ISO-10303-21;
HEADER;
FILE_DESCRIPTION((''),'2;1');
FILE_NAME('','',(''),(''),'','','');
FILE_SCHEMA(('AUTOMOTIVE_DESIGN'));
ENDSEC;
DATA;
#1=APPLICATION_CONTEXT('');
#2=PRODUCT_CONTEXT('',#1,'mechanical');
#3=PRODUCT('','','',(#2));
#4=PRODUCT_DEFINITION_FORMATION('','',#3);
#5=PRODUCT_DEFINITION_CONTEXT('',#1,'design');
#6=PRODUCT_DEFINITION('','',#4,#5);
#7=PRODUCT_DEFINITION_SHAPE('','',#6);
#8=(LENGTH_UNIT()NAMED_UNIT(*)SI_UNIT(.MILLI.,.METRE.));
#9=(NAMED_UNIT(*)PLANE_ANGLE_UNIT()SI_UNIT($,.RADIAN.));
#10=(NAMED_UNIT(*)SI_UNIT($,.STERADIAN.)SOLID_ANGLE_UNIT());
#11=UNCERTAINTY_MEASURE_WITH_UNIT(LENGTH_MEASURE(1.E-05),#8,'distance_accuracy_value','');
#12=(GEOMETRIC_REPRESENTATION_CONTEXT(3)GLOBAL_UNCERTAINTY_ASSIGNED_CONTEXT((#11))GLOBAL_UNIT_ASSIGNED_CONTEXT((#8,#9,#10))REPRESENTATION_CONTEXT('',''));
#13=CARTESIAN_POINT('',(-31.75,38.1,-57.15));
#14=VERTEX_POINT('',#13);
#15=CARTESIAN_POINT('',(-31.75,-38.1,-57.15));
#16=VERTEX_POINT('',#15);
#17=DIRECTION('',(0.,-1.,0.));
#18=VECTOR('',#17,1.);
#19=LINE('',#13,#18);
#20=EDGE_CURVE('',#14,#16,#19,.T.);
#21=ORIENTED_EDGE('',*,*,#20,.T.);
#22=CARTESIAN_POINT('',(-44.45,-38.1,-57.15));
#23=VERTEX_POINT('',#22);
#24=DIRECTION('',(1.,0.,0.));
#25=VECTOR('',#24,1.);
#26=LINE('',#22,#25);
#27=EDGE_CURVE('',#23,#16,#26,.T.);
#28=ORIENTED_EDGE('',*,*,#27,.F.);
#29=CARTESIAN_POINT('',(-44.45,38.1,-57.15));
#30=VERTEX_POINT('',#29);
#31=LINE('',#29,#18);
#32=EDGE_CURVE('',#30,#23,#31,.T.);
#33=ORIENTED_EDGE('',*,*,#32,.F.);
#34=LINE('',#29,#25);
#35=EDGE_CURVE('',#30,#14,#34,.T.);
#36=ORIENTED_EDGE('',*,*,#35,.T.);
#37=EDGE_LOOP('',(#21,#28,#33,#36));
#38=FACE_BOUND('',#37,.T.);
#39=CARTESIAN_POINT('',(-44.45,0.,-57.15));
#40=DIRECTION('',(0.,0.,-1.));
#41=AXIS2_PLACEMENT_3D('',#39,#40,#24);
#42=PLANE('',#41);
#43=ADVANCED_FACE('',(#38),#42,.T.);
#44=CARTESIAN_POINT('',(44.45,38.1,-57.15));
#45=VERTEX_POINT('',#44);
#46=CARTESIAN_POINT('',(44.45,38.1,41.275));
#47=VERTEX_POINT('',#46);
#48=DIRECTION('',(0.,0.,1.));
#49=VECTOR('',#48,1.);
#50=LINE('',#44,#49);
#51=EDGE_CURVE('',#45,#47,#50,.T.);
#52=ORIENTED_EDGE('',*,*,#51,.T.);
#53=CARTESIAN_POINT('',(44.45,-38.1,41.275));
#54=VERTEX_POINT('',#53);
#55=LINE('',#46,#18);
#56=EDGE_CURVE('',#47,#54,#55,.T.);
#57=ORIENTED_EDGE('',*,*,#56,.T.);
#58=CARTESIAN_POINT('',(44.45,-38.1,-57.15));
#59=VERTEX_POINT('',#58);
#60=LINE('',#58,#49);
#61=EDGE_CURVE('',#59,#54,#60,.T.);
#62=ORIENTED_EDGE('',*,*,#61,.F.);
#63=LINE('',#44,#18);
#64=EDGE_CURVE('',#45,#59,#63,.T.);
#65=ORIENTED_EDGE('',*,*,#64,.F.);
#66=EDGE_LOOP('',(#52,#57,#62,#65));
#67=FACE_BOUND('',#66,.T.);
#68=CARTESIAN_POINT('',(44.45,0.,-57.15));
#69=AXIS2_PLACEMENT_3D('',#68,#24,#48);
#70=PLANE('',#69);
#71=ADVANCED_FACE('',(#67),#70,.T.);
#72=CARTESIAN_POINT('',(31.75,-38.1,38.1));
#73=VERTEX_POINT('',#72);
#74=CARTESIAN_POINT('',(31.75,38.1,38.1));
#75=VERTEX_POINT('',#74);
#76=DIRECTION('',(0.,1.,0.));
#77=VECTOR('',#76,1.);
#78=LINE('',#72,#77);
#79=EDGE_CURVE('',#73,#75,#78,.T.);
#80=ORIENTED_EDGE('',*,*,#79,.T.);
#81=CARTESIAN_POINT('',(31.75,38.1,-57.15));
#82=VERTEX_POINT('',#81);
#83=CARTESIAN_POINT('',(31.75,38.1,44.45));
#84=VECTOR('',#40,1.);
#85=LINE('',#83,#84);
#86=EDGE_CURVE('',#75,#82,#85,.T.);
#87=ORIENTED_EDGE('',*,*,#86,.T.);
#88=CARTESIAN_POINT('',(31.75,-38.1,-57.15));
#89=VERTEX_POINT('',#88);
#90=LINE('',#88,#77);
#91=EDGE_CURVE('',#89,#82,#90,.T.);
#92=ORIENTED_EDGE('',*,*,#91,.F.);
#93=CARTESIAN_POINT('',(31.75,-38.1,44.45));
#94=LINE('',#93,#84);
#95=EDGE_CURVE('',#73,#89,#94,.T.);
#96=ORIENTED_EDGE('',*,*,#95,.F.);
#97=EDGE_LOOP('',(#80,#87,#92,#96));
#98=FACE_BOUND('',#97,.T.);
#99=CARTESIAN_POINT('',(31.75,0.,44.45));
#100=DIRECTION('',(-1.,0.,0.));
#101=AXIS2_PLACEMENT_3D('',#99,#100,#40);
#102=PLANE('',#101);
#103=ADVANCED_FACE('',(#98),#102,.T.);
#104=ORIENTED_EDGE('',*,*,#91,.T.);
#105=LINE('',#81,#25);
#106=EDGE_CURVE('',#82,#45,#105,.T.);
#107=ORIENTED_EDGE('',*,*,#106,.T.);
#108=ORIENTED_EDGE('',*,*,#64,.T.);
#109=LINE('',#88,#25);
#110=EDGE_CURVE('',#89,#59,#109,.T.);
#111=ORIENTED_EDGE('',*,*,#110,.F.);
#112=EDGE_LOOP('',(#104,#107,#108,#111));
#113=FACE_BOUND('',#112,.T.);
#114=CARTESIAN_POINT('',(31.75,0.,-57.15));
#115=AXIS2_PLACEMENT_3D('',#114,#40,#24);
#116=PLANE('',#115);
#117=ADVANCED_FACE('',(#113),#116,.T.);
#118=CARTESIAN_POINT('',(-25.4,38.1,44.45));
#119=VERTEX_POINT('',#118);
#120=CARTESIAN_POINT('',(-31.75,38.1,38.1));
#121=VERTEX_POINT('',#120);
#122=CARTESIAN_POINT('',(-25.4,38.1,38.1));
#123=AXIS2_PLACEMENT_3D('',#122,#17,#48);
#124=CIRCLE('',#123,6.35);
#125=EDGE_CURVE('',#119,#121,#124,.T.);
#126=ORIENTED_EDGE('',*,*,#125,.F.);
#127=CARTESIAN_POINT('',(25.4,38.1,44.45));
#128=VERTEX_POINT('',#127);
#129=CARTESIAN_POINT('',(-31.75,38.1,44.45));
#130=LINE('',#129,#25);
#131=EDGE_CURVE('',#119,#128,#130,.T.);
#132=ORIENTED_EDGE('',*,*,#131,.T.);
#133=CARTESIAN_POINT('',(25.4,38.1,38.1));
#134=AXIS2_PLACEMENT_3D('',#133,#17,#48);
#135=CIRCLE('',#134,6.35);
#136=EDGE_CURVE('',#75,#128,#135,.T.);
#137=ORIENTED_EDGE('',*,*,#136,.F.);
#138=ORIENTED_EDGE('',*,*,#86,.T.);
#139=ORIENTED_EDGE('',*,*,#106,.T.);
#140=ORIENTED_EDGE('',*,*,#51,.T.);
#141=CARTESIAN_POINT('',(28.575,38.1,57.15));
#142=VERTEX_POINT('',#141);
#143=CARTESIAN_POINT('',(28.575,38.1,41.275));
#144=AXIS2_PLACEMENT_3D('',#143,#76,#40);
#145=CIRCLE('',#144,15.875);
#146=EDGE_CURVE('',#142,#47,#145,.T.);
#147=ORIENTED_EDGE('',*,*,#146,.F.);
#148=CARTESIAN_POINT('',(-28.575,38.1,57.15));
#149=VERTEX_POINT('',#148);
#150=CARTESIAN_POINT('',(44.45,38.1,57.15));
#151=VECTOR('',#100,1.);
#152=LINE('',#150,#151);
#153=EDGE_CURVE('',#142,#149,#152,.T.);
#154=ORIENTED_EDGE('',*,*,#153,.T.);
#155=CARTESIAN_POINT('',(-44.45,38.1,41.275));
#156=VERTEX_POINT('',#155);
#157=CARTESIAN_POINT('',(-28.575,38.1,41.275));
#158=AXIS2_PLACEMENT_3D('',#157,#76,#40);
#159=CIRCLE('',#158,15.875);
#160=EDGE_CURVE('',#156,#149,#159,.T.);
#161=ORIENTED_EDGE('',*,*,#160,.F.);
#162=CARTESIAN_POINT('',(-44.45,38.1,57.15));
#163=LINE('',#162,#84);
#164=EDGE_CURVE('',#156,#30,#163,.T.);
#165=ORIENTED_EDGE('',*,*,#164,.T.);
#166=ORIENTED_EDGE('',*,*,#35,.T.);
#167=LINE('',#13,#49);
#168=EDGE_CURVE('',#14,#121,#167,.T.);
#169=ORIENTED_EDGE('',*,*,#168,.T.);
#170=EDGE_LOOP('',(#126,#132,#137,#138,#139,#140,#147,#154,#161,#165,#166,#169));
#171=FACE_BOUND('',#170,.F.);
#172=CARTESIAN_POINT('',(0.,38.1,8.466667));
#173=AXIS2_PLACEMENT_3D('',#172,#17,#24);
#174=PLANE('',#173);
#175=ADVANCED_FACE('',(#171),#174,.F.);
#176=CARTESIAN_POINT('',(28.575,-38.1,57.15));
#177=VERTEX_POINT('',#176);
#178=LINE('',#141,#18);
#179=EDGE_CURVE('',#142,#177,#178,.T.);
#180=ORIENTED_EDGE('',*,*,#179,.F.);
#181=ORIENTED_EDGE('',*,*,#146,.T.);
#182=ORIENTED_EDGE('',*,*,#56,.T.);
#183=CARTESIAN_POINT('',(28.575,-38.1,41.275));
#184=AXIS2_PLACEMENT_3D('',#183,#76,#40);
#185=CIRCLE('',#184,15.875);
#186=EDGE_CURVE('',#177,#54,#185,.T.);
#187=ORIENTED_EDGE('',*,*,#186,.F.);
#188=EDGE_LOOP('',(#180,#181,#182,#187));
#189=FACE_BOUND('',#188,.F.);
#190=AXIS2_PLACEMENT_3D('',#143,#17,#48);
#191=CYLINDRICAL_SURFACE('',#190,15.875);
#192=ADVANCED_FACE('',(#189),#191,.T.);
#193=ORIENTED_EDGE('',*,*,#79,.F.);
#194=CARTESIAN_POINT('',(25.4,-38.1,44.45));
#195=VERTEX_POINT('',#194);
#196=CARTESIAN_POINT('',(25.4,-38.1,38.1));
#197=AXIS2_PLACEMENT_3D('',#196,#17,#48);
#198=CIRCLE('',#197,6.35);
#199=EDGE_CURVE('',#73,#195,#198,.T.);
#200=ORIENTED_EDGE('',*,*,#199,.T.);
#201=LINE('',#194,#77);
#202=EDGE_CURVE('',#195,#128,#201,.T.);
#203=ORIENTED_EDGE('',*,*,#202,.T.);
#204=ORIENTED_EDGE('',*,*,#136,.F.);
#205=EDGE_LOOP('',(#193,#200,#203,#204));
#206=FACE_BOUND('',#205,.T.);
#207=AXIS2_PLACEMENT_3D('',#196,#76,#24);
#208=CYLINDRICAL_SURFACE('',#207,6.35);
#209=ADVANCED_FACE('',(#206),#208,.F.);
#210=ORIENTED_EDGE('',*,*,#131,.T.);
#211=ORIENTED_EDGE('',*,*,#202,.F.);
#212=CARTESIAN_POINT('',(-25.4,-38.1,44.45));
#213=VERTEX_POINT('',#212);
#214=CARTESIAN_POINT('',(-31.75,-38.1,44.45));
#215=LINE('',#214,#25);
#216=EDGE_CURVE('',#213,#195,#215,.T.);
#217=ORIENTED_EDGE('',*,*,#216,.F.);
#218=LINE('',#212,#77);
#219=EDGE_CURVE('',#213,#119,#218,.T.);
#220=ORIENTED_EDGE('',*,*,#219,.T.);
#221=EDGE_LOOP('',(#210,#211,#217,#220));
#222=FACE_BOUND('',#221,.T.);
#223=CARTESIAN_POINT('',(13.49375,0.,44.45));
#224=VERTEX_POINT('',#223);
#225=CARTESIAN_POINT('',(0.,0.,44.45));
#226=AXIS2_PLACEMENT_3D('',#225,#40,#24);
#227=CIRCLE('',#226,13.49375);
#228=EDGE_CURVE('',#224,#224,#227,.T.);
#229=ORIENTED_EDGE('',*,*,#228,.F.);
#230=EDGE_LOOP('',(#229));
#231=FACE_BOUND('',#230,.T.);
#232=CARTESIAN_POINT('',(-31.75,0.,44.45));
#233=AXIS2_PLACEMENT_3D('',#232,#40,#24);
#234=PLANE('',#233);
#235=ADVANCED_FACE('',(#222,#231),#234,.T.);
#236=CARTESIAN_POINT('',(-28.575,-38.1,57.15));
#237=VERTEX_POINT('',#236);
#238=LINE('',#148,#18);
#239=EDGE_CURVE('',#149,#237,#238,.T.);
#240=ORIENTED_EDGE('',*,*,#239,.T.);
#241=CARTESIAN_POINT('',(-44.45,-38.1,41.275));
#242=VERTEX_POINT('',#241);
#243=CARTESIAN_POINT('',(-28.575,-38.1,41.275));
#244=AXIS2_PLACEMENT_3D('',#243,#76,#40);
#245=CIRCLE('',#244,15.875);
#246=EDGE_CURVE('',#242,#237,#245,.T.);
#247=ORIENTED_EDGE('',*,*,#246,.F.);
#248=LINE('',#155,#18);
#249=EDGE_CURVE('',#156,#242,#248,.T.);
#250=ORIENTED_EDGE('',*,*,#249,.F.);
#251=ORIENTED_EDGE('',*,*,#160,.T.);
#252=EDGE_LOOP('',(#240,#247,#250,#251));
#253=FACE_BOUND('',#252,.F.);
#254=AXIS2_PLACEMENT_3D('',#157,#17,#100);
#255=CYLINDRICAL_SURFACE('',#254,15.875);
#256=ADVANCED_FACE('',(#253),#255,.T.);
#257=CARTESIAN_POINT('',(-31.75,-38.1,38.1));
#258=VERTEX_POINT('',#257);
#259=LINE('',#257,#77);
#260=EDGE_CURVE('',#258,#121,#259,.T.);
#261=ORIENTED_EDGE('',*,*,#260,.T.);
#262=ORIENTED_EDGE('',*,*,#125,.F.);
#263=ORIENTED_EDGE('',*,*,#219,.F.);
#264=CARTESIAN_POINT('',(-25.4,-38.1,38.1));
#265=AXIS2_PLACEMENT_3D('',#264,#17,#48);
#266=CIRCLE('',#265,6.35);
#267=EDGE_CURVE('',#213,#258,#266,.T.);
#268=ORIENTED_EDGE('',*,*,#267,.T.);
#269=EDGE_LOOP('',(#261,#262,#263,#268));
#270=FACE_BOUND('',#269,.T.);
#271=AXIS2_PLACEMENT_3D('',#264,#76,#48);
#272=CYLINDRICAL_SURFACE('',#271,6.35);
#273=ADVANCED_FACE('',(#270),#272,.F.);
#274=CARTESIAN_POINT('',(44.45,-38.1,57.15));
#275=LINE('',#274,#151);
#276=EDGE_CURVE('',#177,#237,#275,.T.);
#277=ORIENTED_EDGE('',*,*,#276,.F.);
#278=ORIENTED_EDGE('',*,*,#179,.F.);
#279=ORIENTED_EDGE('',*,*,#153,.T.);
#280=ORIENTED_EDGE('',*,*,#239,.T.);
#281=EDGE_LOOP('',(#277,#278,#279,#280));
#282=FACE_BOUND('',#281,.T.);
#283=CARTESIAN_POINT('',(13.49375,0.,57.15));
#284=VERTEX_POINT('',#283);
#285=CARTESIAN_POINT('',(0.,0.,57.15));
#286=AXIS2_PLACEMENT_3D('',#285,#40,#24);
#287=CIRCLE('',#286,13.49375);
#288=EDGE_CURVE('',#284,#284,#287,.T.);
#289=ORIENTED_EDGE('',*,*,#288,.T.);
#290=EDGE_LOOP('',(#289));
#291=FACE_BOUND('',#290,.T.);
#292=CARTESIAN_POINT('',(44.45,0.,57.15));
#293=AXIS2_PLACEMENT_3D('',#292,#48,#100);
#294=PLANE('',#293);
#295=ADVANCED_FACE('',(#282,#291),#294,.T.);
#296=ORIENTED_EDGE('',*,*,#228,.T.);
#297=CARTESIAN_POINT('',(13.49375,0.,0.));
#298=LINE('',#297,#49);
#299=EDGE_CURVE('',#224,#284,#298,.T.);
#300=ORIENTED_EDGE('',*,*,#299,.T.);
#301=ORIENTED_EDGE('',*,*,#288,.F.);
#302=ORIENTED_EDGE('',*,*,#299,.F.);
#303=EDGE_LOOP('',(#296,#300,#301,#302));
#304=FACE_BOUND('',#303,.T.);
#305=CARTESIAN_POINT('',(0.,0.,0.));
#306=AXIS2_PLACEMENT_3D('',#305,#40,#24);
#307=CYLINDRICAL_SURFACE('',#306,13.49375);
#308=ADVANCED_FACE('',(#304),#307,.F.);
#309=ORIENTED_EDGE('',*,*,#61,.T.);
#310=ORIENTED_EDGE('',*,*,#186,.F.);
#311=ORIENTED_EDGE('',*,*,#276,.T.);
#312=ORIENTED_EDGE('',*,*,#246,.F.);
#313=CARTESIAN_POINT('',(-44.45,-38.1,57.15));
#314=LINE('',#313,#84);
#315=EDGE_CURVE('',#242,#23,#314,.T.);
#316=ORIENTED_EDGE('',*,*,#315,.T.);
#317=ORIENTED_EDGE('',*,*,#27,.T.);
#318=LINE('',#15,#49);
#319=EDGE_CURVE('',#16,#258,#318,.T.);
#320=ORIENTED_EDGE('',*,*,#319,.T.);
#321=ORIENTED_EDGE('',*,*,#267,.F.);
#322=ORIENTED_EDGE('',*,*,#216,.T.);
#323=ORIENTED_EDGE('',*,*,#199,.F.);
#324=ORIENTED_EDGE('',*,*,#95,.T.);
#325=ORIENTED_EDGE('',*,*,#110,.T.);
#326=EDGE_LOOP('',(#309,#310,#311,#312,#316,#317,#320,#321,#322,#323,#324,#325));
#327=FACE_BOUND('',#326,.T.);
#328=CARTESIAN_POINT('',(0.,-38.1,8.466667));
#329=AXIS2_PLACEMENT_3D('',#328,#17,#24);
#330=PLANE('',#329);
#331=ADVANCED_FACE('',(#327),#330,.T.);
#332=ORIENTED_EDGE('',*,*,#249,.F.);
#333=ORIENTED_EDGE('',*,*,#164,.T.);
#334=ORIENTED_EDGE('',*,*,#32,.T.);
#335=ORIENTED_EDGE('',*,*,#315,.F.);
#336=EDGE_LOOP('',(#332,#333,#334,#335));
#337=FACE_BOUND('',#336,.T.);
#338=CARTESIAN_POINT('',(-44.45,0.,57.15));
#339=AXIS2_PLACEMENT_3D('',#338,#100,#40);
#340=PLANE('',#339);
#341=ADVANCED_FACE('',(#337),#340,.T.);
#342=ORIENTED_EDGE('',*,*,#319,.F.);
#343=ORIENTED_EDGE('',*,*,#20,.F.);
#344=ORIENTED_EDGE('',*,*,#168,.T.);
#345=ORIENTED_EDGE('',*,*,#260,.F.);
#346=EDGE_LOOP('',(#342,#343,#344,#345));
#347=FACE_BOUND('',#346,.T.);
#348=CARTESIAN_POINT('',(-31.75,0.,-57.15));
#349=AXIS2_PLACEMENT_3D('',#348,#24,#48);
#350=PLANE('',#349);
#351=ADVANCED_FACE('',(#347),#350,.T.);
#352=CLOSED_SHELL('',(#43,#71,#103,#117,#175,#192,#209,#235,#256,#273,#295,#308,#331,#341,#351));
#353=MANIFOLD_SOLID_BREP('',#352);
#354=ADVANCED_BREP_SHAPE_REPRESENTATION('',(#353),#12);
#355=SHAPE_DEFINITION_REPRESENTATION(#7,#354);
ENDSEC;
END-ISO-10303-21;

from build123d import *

# Parameters (mm, degrees)
F1_DEPTH = 38.1
F2_R     = 6.35
F3_R     = 15.875
F4_R     = 13.49375
F5_DEPTH = 57.151


with BuildPart() as f1:
    # F0 (on Front) → F1 (new body, symmetric)
    with BuildSketch(Plane.XZ):
        Polygon((31.75, -57.15), (44.45, -57.15), (44.45, 57.15), (-44.45, 57.15), (-44.45, -57.15), (-31.75, -57.15), (-31.75, 44.45), (31.75, 44.45), align=None)
    extrude(amount=F1_DEPTH, both=True)

    # F2
    f2_edges = [f1.edges().sort_by_distance(p)[0] for p in [
        (-31.75, 0, 44.45),
        (31.75, 0, 44.45),
    ]]
    fillet(f2_edges, radius=F2_R)

    # F3
    f3_edges = [f1.edges().sort_by_distance(p)[0] for p in [
        (-44.45, 0, 57.15),
        (44.45, 0, 57.15),
    ]]
    fillet(f3_edges, radius=F3_R)

    # F4 (on Top) → F5 (cut, through all)
    with BuildSketch(Plane.XY):
        Circle(F4_R)
    extrude(amount=F5_DEPTH, mode=Mode.SUBTRACT)


solid = f1.part
